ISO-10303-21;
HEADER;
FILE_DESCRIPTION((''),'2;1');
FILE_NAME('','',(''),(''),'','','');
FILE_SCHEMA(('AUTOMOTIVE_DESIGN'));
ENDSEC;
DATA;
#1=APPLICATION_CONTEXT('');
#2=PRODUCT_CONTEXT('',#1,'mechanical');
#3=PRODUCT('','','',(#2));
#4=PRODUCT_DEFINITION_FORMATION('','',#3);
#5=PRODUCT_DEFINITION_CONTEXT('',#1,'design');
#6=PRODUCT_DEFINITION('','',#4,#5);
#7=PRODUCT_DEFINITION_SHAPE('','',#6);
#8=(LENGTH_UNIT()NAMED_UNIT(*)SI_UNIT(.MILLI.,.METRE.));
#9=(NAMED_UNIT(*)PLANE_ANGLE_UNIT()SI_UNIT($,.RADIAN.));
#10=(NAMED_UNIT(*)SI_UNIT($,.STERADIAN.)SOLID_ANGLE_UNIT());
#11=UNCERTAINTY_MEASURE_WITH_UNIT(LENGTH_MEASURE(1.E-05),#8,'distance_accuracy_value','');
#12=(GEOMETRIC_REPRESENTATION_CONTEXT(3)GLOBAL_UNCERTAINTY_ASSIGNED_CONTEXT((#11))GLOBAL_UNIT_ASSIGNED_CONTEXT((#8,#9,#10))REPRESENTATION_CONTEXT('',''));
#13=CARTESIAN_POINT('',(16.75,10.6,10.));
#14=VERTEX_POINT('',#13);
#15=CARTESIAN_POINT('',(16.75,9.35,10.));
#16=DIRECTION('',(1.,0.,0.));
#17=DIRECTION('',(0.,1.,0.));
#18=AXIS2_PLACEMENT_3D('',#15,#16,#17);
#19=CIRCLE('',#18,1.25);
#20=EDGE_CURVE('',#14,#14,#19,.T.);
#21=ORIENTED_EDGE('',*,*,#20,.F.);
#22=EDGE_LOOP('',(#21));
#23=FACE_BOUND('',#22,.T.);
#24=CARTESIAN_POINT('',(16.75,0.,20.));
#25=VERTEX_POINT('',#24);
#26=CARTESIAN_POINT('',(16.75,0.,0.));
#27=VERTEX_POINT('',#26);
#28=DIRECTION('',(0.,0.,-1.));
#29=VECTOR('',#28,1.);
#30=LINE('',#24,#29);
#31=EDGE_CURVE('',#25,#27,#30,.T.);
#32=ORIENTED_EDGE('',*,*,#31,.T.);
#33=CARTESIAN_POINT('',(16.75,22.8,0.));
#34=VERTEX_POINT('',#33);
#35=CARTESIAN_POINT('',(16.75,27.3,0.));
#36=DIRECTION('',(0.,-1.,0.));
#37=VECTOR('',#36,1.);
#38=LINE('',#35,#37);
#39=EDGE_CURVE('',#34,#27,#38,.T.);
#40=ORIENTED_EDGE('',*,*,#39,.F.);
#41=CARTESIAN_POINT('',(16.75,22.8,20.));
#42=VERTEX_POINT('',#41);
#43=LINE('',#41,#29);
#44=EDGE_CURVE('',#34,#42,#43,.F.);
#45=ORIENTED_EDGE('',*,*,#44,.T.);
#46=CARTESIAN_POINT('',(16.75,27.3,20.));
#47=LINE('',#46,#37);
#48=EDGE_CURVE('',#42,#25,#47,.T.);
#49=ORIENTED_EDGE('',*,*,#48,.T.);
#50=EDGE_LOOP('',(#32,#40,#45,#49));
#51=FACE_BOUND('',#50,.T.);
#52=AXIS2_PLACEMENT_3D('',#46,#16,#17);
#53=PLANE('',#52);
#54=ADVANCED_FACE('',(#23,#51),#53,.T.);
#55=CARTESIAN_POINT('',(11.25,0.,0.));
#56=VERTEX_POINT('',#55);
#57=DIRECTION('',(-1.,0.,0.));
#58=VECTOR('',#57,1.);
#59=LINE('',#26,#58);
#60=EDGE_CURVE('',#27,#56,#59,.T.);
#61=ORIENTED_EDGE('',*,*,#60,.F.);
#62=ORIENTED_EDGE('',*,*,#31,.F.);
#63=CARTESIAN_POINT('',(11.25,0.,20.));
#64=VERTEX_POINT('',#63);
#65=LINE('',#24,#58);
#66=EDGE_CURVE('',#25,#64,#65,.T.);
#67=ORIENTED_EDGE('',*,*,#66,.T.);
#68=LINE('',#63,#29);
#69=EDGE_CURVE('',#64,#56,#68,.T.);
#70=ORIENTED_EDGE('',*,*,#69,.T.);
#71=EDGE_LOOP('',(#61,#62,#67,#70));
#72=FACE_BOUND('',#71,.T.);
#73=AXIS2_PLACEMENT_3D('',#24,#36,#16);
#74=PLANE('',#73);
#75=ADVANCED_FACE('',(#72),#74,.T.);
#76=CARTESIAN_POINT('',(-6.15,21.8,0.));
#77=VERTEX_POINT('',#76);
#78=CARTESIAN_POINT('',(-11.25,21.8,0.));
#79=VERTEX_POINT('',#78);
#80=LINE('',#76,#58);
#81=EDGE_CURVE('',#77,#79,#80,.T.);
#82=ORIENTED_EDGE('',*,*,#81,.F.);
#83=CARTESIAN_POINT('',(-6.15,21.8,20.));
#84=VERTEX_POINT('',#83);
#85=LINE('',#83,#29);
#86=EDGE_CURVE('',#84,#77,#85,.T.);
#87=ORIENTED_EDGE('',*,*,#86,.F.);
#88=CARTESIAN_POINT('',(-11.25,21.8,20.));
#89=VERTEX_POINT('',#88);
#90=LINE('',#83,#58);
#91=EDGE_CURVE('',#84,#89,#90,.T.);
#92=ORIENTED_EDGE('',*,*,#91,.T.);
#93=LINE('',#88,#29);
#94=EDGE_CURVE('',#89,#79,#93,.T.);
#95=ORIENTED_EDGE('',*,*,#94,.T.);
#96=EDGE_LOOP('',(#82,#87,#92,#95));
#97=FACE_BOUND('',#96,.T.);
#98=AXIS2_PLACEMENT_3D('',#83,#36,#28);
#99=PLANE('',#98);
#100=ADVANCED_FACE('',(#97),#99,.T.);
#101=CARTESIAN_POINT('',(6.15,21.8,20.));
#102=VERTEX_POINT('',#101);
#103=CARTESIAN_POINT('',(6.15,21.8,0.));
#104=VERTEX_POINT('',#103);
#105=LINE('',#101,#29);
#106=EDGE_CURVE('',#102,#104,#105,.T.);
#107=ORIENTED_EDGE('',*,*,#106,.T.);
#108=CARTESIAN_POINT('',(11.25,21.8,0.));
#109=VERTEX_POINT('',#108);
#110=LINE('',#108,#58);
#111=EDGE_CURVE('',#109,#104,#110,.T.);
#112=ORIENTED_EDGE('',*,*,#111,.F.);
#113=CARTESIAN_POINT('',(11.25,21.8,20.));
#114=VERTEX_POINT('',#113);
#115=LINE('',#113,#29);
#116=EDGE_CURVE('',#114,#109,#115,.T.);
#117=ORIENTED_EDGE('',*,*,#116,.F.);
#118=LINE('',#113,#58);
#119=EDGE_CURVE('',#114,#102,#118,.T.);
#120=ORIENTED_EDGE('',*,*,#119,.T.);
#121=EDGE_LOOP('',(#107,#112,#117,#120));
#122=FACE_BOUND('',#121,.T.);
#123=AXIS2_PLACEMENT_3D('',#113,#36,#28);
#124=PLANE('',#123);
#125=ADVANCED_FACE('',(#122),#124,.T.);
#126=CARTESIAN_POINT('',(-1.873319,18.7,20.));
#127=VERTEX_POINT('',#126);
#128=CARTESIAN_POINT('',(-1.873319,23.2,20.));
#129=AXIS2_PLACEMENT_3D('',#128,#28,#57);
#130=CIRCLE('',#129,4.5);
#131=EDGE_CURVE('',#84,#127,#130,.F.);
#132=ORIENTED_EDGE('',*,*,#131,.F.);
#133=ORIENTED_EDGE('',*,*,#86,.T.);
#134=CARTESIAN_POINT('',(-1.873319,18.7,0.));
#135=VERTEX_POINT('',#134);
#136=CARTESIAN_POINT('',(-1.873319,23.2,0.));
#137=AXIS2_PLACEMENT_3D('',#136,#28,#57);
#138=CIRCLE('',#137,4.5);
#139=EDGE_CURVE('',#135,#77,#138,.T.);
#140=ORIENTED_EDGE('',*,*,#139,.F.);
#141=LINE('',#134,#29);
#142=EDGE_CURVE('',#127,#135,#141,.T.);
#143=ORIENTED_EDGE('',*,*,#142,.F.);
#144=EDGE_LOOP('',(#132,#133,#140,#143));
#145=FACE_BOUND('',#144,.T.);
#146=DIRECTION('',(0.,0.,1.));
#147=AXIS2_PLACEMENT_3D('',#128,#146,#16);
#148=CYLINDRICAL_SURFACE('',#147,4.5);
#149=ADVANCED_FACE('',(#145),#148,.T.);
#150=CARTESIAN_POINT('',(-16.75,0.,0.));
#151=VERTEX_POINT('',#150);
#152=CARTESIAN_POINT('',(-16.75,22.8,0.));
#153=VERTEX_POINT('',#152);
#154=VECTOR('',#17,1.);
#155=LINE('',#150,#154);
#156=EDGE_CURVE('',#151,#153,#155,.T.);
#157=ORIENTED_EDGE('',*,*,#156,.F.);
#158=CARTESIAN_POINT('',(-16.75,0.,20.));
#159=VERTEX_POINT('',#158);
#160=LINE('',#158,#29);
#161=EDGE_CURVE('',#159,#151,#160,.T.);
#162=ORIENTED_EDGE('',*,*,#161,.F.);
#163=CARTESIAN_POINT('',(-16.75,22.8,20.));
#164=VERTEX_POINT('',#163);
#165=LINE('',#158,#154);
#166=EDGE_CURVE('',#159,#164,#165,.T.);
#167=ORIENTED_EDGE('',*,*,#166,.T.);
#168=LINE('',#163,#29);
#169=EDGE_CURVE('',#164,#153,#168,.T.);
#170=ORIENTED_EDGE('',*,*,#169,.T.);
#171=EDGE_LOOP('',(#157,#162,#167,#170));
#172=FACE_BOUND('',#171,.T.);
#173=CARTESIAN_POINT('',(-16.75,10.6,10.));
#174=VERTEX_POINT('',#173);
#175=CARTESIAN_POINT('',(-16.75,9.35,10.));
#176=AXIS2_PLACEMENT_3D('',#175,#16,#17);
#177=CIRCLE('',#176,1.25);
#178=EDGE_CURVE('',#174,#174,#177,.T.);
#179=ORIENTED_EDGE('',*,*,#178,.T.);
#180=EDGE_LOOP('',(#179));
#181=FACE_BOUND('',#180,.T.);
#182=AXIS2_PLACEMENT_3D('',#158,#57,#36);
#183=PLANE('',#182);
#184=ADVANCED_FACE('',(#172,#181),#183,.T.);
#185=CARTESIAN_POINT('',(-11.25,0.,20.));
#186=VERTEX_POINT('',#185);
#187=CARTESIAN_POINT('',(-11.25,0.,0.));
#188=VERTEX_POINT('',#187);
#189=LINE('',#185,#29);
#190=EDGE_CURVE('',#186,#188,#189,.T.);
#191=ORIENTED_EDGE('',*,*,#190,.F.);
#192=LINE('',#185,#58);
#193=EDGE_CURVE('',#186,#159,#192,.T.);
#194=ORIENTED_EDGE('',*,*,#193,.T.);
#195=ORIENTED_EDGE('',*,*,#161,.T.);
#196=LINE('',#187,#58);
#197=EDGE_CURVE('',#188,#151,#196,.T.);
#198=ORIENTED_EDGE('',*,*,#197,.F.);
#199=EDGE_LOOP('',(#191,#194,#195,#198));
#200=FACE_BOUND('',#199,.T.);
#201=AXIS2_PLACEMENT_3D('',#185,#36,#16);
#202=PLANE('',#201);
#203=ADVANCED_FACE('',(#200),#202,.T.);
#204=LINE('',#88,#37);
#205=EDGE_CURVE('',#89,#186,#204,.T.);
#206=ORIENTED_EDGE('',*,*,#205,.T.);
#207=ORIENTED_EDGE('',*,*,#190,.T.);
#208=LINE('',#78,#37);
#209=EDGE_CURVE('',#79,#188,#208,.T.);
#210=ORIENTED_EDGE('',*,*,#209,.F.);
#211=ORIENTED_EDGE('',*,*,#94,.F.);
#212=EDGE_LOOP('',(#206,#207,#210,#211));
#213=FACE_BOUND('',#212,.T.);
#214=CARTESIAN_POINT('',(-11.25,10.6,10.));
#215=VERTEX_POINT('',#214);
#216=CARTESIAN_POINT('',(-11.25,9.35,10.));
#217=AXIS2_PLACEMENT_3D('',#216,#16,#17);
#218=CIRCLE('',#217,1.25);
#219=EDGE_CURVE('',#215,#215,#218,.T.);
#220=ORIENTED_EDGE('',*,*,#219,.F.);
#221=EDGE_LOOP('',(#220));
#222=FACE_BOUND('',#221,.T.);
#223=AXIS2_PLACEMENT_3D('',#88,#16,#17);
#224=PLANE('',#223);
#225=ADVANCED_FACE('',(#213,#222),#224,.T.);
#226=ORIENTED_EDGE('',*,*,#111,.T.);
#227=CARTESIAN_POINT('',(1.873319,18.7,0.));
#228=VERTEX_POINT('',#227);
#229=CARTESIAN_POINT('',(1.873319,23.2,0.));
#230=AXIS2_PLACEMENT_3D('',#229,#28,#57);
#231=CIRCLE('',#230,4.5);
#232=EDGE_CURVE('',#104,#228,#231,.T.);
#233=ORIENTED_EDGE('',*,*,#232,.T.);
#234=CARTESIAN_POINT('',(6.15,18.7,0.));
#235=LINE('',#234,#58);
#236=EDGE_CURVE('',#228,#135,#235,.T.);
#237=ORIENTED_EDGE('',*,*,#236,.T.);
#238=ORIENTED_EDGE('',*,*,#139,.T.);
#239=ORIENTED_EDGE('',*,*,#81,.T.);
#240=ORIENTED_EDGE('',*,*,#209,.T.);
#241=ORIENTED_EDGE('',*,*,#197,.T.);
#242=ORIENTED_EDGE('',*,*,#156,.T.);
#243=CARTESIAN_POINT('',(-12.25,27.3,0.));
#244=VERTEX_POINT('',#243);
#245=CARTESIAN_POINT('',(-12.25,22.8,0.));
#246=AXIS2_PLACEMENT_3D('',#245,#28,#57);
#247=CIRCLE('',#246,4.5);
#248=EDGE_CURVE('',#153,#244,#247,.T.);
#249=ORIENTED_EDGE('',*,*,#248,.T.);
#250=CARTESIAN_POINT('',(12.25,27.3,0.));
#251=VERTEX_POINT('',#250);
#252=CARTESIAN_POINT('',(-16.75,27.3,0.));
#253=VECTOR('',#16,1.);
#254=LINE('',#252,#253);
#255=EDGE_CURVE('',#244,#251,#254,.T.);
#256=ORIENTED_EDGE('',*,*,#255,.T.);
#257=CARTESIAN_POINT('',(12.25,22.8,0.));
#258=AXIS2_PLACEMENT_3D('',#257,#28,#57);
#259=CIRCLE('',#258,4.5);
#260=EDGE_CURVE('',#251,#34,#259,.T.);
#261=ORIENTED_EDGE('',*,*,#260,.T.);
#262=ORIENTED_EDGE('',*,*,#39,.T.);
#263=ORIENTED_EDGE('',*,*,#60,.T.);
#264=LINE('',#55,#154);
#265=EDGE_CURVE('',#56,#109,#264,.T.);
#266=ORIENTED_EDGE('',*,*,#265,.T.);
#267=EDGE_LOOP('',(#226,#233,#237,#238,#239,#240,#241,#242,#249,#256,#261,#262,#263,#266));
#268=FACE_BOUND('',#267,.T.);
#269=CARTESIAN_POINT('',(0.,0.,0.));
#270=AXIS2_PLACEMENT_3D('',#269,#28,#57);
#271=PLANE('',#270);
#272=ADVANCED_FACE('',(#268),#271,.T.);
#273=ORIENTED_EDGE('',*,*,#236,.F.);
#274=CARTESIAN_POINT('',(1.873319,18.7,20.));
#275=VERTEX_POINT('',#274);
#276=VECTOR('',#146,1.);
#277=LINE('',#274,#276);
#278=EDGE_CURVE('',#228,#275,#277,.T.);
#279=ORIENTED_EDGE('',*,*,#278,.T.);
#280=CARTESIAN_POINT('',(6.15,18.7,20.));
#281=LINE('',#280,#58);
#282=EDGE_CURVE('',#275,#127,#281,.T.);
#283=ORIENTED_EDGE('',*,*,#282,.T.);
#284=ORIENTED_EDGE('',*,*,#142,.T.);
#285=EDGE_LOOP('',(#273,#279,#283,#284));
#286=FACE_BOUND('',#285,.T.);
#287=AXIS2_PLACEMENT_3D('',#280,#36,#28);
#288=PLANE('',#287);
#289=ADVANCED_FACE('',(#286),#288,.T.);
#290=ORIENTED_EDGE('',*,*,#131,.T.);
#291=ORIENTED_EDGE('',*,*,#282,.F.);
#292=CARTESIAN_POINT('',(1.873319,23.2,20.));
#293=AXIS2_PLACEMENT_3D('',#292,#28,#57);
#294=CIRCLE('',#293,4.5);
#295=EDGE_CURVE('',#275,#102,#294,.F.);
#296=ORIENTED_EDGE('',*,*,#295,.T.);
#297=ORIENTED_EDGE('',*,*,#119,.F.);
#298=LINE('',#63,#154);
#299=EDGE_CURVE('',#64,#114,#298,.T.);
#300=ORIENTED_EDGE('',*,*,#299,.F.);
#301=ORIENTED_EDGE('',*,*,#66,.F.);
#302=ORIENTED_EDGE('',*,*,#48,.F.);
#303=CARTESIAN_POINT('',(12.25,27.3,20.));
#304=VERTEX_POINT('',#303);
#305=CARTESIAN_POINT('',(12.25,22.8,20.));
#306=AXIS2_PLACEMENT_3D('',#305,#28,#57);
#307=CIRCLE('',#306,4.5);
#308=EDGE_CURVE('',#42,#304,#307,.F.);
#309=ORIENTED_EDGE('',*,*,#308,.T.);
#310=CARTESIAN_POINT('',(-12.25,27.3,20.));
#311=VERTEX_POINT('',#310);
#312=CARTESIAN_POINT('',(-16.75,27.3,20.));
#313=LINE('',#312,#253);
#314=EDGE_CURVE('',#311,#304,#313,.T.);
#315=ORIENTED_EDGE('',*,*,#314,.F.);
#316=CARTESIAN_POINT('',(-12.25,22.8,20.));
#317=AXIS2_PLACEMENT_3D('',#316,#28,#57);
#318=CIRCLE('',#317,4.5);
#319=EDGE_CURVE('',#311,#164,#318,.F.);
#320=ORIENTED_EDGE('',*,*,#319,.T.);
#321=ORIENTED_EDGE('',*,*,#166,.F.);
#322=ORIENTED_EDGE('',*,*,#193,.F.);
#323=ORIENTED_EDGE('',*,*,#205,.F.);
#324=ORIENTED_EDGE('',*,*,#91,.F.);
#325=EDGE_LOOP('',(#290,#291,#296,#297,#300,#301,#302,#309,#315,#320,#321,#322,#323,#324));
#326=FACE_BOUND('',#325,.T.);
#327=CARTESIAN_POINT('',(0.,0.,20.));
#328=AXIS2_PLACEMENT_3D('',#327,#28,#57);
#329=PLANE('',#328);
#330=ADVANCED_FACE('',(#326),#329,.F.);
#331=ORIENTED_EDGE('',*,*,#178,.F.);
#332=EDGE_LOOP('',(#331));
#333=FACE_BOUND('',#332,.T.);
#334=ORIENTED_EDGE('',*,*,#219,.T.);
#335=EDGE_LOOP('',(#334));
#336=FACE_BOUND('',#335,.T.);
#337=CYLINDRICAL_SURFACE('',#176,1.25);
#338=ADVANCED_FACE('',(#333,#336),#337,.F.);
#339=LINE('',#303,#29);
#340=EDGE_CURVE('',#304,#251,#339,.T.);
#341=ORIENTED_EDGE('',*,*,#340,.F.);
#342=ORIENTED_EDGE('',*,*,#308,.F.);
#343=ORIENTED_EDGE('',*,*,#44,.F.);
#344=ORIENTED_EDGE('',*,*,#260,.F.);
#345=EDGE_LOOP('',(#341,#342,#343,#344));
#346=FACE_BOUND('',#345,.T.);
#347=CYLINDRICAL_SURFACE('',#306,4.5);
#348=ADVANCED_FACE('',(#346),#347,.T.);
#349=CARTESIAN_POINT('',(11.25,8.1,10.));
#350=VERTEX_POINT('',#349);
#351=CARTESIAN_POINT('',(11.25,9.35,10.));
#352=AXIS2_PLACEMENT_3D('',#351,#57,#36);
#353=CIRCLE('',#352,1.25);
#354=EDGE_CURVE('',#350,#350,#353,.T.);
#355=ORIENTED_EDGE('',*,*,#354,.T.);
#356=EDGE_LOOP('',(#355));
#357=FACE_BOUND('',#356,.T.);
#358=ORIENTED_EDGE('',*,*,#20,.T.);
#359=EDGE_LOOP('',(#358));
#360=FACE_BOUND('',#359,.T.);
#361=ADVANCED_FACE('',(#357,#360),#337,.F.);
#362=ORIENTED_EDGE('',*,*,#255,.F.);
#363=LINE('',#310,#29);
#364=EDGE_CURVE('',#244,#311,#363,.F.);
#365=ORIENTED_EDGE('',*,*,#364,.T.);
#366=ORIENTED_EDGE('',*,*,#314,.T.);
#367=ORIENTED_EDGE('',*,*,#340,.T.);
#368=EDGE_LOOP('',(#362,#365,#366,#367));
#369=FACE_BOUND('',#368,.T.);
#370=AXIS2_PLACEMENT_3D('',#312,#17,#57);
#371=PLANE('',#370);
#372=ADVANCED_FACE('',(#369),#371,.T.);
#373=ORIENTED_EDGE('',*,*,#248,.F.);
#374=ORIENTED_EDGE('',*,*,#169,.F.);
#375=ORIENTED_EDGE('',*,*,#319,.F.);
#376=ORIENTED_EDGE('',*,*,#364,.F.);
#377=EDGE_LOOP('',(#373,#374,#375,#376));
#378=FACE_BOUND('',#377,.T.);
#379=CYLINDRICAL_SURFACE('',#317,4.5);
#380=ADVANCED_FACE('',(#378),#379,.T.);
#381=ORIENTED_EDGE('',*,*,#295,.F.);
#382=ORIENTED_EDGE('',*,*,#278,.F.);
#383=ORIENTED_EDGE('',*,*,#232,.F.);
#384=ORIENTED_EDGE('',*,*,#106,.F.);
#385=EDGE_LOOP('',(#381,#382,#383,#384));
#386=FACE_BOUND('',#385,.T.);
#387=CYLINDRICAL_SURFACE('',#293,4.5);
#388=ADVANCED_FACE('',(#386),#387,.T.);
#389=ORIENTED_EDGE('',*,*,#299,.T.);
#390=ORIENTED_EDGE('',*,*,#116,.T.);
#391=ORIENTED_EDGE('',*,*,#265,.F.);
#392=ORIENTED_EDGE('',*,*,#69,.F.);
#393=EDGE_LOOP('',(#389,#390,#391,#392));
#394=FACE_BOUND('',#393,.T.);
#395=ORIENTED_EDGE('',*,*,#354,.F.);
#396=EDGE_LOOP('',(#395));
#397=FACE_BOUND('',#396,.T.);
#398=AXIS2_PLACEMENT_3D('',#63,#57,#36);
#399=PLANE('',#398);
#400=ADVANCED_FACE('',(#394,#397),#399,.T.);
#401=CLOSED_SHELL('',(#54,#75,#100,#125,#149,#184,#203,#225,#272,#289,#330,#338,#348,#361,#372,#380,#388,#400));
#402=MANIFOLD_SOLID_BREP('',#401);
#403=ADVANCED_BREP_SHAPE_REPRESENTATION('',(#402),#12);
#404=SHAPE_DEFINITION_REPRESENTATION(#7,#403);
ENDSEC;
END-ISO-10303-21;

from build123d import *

# Parameters (mm, degrees)
BOSS_EXTRUDE1_DEPTH = 20
FILLET1_R           = 4.5
FILLET2_R           = 4.5
SKETCH2_R           = 1.25
CUT_EXTRUDE1_DEPTH  = 48.618693808


with BuildPart() as part:
    # Sketch1 → Boss-Extrude1 (new body)
    with BuildSketch(Plane.XY):
        Polygon((-16.75, 0), (-16.75, 27.3), (16.75, 27.3), (16.75, 0), (11.25, 0), (11.25, 21.8), (6.15, 21.8), (6.15, 18.7), (-6.15, 18.7), (-6.15, 21.8), (-11.25, 21.8), (-11.25, 0), align=None)
    extrude(amount=BOSS_EXTRUDE1_DEPTH)

    # Fillet1
    fillet1_edges = [part.edges().sort_by_distance(p)[0] for p in [
        (16.75, 27.3, 10),
        (-16.75, 27.3, 10),
    ]]
    fillet(fillet1_edges, radius=FILLET1_R)

    # Fillet2
    # the kernel refuses this fillet: 4.5 mm, written as the material it takes off along each edge
    with BuildSketch(Plane(origin=(-6.15, 18.7, -10.69170239), x_dir=(0, 1, 0), z_dir=(0, 0, 1))) as fillet2_piece_1:
        with BuildLine():
            CenterArc((4.5, -4.276680956), FILLET2_R, 108.126203961, 71.873796039)
            Line((0, -4.276680956), (-0.09, -4.276680956))
            Line((-0.09, -4.276680956), (-0.09, 0))
            Line((-0.09, 0), (0, 0.09))
            ThreePointArc((0, 0.09), (1.55, 0.09), (3.072, 0.085533619))
            Line((3.072, 0.085533619), (3.1, 0))
        make_face()
    extrude(amount=41.38340478, mode=Mode.SUBTRACT)
    with BuildSketch(Plane(origin=(6.15, 18.7, -10.69170239), x_dir=(-1, 0, 0), z_dir=(0, 0, 1))) as fillet2_piece_2:
        with BuildLine():
            CenterArc((4.276680956, -4.5), FILLET2_R, 90, 71.873796039)
            Line((0, -3.1), (-0.085533619, -3.072))
            ThreePointArc((-0.085533619, -3.072), (-0.09, -1.55), (-0.09, 0))
            Line((-0.09, 0), (0, 0.09))
            Line((0, 0.09), (4.276680956, 0.09))
            Line((4.276680956, 0.09), (4.276680956, 0))
        make_face()
    extrude(amount=41.38340478, mode=Mode.SUBTRACT)

    # Sketch2 → Cut-Extrude1 (cut, through all)
    with BuildSketch(Plane(origin=(16.75, 0, 0), x_dir=(0, 0, -1), z_dir=(1, 0, 0))):
        with Locations(Location((-10, 9.35, 0), (0, 0, 90))):
            Circle(SKETCH2_R)
    extrude(amount=-CUT_EXTRUDE1_DEPTH, mode=Mode.SUBTRACT)


solid = part.part
